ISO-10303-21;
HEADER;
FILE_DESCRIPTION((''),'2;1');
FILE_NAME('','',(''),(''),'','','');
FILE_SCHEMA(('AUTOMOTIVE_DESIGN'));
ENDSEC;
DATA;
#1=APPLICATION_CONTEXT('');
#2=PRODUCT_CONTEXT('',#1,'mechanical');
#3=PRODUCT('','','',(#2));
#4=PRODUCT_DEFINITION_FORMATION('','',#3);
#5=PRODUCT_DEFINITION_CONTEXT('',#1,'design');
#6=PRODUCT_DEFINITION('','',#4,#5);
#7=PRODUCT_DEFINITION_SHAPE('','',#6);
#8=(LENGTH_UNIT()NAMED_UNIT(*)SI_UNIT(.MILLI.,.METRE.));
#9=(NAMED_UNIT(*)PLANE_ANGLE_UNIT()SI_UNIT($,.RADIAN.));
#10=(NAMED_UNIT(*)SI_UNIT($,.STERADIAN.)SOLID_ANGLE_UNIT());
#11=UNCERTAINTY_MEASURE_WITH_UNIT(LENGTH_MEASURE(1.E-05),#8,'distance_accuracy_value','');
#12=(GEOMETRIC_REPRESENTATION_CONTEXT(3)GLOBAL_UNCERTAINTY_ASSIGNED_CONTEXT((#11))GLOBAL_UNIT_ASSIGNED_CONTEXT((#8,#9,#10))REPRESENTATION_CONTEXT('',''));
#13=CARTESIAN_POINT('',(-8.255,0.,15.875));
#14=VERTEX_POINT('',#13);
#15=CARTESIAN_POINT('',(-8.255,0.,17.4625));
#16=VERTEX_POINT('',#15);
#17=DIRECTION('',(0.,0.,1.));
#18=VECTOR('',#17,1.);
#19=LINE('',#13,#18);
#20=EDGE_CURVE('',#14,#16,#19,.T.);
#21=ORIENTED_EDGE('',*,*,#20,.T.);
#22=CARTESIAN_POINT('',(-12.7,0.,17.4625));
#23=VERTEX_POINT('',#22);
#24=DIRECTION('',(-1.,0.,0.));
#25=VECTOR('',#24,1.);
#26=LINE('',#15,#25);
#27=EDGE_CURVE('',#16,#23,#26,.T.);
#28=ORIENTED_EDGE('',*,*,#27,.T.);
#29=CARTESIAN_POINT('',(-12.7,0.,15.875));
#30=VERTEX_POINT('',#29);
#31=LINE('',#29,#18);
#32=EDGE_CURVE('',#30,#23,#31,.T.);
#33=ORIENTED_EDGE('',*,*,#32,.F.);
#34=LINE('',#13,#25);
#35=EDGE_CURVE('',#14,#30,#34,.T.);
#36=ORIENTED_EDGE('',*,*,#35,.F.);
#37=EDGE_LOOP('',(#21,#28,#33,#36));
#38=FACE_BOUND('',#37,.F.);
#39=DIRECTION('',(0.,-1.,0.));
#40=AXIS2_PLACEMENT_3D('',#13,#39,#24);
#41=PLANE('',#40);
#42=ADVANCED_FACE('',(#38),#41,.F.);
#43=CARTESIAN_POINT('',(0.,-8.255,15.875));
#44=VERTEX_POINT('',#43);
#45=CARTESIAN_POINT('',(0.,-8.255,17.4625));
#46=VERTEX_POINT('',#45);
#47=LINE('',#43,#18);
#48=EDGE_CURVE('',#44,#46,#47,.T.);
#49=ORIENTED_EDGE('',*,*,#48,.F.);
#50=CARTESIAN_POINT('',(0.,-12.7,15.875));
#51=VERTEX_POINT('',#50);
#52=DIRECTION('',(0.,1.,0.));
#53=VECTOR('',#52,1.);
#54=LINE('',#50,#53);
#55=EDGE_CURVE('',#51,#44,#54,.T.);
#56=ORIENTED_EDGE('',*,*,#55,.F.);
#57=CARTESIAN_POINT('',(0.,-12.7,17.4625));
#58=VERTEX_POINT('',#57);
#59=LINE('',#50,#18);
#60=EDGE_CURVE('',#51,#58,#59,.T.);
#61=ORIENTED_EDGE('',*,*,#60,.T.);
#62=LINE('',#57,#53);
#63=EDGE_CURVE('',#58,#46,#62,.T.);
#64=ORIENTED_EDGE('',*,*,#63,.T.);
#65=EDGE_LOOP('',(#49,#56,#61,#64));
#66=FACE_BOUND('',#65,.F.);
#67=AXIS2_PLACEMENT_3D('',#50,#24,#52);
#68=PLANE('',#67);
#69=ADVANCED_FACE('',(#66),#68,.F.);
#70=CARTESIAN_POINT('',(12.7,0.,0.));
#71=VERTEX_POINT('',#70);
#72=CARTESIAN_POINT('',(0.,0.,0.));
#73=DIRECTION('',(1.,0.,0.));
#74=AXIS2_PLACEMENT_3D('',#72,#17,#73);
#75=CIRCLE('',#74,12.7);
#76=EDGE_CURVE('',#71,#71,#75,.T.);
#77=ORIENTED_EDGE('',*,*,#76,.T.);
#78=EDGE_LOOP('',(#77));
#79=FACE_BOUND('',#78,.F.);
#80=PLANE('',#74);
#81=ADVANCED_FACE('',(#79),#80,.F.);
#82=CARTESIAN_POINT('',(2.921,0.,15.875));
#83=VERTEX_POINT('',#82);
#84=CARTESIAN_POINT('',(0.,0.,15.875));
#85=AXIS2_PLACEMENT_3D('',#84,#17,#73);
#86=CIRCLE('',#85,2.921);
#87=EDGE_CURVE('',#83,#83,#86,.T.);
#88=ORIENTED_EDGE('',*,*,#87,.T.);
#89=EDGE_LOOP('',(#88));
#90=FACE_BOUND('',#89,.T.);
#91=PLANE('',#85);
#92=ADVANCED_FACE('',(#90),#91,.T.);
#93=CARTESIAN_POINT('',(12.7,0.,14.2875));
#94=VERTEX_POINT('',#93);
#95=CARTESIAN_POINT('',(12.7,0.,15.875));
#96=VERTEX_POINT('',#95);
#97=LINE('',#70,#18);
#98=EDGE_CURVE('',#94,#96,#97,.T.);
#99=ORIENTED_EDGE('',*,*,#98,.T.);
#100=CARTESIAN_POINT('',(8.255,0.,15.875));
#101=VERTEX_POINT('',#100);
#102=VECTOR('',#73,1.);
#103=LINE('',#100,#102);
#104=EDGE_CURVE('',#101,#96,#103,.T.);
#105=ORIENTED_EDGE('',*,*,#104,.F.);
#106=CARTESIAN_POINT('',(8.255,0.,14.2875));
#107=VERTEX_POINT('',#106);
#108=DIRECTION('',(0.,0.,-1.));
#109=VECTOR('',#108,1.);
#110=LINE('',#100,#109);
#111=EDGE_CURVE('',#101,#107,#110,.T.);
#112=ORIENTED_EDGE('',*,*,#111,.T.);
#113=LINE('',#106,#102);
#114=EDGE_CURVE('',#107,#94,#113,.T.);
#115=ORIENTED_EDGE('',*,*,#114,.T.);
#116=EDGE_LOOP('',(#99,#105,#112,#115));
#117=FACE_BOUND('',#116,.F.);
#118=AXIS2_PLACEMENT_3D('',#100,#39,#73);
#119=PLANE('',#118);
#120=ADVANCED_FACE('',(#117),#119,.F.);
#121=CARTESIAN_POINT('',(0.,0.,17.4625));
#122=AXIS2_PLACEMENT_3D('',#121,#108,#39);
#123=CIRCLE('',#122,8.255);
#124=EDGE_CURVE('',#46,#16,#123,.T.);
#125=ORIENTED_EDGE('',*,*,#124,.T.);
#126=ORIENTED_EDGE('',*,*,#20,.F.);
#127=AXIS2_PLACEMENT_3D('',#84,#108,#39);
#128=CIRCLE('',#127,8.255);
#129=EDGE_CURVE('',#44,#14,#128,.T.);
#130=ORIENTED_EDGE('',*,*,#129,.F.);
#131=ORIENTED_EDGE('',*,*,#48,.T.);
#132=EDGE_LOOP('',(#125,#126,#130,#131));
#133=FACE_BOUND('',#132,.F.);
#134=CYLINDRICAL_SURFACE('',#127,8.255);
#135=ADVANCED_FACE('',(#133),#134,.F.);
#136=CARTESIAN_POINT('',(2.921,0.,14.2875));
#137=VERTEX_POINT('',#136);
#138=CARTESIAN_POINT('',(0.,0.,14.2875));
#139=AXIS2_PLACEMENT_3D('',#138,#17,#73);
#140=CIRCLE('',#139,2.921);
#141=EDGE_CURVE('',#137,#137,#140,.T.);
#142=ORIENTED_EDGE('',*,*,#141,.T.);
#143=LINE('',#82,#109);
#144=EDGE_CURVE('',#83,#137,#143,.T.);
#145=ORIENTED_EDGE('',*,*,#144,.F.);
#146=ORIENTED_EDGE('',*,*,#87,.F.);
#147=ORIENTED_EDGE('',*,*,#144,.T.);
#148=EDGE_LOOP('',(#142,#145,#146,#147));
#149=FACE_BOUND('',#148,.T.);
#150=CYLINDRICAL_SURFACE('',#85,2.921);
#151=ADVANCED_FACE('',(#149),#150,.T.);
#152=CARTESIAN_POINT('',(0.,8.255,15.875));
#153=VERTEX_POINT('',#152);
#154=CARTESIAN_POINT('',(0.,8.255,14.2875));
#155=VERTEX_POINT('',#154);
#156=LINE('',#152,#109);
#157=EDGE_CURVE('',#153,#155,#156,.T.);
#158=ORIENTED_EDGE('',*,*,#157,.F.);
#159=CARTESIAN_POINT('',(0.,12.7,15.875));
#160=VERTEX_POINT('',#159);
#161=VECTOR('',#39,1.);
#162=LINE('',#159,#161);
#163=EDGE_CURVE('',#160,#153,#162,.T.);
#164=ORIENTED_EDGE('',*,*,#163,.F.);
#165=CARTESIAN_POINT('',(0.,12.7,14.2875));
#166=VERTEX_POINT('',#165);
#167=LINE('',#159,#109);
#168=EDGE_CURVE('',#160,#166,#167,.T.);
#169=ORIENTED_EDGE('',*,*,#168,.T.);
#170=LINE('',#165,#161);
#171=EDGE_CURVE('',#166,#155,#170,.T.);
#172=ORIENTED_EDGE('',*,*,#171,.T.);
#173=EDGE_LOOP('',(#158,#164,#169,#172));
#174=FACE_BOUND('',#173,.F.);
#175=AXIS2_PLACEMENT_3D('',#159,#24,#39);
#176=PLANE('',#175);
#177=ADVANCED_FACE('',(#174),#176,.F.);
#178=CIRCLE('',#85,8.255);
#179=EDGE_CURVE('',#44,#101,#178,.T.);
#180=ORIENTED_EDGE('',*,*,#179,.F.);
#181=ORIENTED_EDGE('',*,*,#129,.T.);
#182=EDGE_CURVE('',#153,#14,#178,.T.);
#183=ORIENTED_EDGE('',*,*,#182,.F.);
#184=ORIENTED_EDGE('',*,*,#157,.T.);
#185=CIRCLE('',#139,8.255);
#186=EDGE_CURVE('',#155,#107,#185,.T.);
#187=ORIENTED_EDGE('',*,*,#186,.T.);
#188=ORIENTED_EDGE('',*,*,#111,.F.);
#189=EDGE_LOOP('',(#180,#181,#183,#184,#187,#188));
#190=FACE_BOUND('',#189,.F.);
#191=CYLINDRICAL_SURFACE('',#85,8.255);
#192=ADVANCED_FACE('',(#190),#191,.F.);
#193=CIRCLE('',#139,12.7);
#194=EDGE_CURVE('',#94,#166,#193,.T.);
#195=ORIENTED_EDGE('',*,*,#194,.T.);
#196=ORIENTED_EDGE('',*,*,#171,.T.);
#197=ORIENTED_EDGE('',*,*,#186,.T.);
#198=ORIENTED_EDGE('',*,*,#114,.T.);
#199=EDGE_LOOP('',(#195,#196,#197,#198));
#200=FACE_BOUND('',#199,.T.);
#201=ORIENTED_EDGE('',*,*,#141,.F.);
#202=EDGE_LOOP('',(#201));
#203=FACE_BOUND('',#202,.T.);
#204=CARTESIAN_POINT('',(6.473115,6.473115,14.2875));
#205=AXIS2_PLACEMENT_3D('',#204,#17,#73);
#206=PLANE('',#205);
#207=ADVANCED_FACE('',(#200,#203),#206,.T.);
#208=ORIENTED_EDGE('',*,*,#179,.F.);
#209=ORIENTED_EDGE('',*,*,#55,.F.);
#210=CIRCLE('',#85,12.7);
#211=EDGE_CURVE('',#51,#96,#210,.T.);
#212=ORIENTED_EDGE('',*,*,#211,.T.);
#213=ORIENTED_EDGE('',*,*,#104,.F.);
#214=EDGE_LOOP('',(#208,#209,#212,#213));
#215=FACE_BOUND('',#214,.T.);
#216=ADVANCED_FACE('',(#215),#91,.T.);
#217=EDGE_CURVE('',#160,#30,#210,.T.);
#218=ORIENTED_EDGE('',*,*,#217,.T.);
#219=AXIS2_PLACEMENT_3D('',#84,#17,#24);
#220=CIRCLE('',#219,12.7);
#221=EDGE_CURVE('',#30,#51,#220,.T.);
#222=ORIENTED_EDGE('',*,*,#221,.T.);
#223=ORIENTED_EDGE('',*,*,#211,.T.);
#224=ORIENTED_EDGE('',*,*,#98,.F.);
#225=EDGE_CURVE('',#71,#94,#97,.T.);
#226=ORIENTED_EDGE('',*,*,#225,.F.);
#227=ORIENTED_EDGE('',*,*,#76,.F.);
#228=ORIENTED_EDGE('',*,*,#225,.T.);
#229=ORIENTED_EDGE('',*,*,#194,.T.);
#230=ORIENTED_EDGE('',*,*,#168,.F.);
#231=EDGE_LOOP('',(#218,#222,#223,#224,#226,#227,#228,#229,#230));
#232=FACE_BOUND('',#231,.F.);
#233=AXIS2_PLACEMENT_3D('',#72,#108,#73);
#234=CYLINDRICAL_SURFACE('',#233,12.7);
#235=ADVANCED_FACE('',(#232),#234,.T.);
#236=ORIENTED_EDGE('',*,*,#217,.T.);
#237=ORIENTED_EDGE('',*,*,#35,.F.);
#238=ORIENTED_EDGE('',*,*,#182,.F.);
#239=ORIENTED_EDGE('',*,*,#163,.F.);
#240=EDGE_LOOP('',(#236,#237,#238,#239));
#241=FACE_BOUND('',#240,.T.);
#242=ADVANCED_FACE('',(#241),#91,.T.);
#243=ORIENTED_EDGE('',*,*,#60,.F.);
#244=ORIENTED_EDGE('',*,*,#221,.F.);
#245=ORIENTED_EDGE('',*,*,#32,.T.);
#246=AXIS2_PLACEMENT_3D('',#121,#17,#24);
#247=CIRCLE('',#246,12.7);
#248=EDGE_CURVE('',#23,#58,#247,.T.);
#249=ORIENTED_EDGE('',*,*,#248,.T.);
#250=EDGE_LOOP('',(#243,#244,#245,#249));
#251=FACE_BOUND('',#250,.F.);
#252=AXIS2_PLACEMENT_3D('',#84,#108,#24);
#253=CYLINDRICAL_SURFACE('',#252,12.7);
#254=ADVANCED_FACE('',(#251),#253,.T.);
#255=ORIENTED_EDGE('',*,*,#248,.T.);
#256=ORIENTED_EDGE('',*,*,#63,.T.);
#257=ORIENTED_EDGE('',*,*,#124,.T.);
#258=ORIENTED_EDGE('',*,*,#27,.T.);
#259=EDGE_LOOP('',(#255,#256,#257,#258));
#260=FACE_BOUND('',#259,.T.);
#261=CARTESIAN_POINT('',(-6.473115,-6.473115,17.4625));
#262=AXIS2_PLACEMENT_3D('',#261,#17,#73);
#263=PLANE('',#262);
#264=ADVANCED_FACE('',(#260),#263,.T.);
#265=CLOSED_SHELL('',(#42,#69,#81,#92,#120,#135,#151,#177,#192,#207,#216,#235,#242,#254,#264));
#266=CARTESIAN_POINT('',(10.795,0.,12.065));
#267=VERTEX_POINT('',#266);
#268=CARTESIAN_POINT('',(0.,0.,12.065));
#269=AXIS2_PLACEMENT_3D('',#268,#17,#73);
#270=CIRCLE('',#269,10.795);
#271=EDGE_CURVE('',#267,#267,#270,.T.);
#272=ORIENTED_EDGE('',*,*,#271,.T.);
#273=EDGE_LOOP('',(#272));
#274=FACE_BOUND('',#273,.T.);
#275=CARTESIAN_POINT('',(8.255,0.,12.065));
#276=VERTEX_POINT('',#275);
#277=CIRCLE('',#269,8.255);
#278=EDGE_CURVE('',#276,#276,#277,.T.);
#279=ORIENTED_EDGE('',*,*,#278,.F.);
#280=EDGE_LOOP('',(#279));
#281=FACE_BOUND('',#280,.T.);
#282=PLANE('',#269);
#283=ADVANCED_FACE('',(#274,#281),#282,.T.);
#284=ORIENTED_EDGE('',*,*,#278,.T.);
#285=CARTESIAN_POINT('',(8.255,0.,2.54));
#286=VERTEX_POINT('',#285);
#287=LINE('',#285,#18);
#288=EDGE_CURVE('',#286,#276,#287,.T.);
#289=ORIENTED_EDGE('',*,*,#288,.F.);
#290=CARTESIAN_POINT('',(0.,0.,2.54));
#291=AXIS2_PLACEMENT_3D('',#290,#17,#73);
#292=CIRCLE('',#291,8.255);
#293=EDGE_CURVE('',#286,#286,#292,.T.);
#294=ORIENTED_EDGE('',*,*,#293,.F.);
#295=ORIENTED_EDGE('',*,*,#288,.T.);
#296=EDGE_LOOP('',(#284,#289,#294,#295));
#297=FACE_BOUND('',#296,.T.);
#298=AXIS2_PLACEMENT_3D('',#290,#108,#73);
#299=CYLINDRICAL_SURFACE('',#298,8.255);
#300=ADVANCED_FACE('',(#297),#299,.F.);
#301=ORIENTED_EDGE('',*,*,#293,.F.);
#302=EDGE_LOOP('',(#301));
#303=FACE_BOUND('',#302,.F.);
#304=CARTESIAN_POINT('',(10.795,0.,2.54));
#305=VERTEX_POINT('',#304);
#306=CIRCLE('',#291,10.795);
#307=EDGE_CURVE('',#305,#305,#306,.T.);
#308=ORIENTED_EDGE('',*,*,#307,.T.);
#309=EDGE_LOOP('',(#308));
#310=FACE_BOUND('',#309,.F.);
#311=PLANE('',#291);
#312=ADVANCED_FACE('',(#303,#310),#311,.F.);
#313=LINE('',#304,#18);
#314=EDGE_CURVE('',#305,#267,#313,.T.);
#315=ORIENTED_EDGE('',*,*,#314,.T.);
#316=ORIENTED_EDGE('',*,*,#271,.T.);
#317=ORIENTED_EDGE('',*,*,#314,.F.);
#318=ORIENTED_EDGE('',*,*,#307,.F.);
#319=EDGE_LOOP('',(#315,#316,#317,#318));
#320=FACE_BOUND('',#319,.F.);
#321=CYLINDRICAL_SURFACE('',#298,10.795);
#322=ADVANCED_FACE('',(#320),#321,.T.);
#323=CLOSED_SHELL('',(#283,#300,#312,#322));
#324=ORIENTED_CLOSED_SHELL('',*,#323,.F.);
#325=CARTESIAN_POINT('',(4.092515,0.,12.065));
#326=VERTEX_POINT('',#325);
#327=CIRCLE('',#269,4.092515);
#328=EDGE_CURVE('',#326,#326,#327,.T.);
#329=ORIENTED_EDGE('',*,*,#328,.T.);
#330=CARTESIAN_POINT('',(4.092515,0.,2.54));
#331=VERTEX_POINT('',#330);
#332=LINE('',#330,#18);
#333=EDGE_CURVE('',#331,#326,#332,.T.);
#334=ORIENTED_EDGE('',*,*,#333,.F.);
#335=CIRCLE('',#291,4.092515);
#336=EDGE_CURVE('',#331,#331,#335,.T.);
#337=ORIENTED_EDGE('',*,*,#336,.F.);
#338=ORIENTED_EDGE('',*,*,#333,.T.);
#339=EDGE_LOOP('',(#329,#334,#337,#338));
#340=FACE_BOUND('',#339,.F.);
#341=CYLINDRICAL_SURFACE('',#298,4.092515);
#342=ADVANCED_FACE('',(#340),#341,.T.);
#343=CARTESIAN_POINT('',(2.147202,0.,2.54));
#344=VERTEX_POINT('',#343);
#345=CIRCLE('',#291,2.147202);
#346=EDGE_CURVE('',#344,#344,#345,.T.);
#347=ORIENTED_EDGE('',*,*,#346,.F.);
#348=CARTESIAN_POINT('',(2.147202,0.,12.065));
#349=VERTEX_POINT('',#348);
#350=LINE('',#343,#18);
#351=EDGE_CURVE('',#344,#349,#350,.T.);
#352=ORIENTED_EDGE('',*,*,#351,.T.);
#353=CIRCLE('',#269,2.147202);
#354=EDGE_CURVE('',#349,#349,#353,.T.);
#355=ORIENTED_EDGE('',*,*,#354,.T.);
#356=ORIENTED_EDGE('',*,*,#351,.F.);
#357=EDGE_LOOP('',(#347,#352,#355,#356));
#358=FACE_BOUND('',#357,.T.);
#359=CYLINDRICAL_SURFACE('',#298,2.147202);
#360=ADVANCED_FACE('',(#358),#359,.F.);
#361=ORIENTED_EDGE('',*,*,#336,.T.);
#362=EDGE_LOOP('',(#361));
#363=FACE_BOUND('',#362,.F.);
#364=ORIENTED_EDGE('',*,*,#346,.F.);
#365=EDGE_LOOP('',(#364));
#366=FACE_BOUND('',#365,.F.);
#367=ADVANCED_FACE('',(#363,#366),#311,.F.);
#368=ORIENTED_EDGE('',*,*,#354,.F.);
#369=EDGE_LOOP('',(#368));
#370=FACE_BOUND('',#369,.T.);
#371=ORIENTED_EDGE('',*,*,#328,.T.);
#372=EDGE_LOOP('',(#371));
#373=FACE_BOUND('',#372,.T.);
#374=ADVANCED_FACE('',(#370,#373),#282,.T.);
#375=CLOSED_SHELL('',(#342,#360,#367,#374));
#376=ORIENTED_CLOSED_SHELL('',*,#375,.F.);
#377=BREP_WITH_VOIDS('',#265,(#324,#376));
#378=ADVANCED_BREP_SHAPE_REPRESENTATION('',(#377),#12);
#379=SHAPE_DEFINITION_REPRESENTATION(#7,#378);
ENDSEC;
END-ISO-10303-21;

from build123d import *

# Parameters (mm, degrees)
F0_R      = 12.7
F0_R_2    = 8.255
F0_R_3    = 2.921
F1_DEPTH  = 15.875
F2_R      = 8.255
F2_R_2    = 2.921
F3_DEPTH  = 1.5875
F5_DEPTH  = 1.5875
F7_DEPTH  = 1.5875
F9_R      = 10.795
F9_R_2    = 8.255
F10_DEPTH = 9.525
F11_R     = 4.0925147824
F11_R_2   = 2.147201803
F12_DEPTH = 9.525


with BuildPart() as f1:
    # F0 (on Top) → F1 (new body)
    with BuildSketch(Plane.XY):
        Circle(F0_R)
        Circle(F0_R_2, mode=Mode.SUBTRACT)
        Circle(F0_R_2)
        Circle(F0_R_3, mode=Mode.SUBTRACT)
        Circle(F0_R_3)
    extrude(amount=F1_DEPTH)

    # F2 (on face) → F3 (cut)
    with BuildSketch(Plane.XY.offset(15.875)):
        Circle(F2_R)
        Circle(F2_R_2, mode=Mode.SUBTRACT)
    extrude(amount=-F3_DEPTH, mode=Mode.SUBTRACT)

    # F4 (on face) → F5 (cut, through all)
    with BuildSketch(Plane.XY.offset(15.875)):
        with BuildLine():
            ThreePointArc((0, 8.255), (5.8371664787, 5.8371664787), (8.255, 0))
            Line((8.255, 0), (12.7, 0))
            ThreePointArc((12.7, 0), (8.9802561211, 8.9802561211), (0, 12.7))
            Line((0, 12.7), (0, 8.255))
        make_face()
    extrude(amount=-F5_DEPTH, mode=Mode.SUBTRACT)

    # F6 (on face) → F7 (join)
    with BuildSketch(Plane.XY.offset(15.875)):
        with BuildLine():
            Line((0, -12.7), (0, -8.255))
            ThreePointArc((0, -8.255), (-5.8371664787, -5.8371664787), (-8.255, 0))
            Line((-8.255, 0), (-12.7, 0))
            ThreePointArc((-12.7, 0), (-8.9802561211, -8.9802561211), (0, -12.7))
        make_face()
    extrude(amount=F7_DEPTH)

    # F9 (on offset) → F10 (cut)
    with BuildSketch(Plane.XY.offset(2.54)):
        Circle(F9_R)
        Circle(F9_R_2, mode=Mode.SUBTRACT)
    extrude(amount=F10_DEPTH, mode=Mode.SUBTRACT)

    # F11 (on offset) → F12 (cut)
    with BuildSketch(Plane.XY.offset(2.54)):
        Circle(F11_R)
        Circle(F11_R_2, mode=Mode.SUBTRACT)
    extrude(amount=F12_DEPTH, mode=Mode.SUBTRACT)


solid = f1.part
